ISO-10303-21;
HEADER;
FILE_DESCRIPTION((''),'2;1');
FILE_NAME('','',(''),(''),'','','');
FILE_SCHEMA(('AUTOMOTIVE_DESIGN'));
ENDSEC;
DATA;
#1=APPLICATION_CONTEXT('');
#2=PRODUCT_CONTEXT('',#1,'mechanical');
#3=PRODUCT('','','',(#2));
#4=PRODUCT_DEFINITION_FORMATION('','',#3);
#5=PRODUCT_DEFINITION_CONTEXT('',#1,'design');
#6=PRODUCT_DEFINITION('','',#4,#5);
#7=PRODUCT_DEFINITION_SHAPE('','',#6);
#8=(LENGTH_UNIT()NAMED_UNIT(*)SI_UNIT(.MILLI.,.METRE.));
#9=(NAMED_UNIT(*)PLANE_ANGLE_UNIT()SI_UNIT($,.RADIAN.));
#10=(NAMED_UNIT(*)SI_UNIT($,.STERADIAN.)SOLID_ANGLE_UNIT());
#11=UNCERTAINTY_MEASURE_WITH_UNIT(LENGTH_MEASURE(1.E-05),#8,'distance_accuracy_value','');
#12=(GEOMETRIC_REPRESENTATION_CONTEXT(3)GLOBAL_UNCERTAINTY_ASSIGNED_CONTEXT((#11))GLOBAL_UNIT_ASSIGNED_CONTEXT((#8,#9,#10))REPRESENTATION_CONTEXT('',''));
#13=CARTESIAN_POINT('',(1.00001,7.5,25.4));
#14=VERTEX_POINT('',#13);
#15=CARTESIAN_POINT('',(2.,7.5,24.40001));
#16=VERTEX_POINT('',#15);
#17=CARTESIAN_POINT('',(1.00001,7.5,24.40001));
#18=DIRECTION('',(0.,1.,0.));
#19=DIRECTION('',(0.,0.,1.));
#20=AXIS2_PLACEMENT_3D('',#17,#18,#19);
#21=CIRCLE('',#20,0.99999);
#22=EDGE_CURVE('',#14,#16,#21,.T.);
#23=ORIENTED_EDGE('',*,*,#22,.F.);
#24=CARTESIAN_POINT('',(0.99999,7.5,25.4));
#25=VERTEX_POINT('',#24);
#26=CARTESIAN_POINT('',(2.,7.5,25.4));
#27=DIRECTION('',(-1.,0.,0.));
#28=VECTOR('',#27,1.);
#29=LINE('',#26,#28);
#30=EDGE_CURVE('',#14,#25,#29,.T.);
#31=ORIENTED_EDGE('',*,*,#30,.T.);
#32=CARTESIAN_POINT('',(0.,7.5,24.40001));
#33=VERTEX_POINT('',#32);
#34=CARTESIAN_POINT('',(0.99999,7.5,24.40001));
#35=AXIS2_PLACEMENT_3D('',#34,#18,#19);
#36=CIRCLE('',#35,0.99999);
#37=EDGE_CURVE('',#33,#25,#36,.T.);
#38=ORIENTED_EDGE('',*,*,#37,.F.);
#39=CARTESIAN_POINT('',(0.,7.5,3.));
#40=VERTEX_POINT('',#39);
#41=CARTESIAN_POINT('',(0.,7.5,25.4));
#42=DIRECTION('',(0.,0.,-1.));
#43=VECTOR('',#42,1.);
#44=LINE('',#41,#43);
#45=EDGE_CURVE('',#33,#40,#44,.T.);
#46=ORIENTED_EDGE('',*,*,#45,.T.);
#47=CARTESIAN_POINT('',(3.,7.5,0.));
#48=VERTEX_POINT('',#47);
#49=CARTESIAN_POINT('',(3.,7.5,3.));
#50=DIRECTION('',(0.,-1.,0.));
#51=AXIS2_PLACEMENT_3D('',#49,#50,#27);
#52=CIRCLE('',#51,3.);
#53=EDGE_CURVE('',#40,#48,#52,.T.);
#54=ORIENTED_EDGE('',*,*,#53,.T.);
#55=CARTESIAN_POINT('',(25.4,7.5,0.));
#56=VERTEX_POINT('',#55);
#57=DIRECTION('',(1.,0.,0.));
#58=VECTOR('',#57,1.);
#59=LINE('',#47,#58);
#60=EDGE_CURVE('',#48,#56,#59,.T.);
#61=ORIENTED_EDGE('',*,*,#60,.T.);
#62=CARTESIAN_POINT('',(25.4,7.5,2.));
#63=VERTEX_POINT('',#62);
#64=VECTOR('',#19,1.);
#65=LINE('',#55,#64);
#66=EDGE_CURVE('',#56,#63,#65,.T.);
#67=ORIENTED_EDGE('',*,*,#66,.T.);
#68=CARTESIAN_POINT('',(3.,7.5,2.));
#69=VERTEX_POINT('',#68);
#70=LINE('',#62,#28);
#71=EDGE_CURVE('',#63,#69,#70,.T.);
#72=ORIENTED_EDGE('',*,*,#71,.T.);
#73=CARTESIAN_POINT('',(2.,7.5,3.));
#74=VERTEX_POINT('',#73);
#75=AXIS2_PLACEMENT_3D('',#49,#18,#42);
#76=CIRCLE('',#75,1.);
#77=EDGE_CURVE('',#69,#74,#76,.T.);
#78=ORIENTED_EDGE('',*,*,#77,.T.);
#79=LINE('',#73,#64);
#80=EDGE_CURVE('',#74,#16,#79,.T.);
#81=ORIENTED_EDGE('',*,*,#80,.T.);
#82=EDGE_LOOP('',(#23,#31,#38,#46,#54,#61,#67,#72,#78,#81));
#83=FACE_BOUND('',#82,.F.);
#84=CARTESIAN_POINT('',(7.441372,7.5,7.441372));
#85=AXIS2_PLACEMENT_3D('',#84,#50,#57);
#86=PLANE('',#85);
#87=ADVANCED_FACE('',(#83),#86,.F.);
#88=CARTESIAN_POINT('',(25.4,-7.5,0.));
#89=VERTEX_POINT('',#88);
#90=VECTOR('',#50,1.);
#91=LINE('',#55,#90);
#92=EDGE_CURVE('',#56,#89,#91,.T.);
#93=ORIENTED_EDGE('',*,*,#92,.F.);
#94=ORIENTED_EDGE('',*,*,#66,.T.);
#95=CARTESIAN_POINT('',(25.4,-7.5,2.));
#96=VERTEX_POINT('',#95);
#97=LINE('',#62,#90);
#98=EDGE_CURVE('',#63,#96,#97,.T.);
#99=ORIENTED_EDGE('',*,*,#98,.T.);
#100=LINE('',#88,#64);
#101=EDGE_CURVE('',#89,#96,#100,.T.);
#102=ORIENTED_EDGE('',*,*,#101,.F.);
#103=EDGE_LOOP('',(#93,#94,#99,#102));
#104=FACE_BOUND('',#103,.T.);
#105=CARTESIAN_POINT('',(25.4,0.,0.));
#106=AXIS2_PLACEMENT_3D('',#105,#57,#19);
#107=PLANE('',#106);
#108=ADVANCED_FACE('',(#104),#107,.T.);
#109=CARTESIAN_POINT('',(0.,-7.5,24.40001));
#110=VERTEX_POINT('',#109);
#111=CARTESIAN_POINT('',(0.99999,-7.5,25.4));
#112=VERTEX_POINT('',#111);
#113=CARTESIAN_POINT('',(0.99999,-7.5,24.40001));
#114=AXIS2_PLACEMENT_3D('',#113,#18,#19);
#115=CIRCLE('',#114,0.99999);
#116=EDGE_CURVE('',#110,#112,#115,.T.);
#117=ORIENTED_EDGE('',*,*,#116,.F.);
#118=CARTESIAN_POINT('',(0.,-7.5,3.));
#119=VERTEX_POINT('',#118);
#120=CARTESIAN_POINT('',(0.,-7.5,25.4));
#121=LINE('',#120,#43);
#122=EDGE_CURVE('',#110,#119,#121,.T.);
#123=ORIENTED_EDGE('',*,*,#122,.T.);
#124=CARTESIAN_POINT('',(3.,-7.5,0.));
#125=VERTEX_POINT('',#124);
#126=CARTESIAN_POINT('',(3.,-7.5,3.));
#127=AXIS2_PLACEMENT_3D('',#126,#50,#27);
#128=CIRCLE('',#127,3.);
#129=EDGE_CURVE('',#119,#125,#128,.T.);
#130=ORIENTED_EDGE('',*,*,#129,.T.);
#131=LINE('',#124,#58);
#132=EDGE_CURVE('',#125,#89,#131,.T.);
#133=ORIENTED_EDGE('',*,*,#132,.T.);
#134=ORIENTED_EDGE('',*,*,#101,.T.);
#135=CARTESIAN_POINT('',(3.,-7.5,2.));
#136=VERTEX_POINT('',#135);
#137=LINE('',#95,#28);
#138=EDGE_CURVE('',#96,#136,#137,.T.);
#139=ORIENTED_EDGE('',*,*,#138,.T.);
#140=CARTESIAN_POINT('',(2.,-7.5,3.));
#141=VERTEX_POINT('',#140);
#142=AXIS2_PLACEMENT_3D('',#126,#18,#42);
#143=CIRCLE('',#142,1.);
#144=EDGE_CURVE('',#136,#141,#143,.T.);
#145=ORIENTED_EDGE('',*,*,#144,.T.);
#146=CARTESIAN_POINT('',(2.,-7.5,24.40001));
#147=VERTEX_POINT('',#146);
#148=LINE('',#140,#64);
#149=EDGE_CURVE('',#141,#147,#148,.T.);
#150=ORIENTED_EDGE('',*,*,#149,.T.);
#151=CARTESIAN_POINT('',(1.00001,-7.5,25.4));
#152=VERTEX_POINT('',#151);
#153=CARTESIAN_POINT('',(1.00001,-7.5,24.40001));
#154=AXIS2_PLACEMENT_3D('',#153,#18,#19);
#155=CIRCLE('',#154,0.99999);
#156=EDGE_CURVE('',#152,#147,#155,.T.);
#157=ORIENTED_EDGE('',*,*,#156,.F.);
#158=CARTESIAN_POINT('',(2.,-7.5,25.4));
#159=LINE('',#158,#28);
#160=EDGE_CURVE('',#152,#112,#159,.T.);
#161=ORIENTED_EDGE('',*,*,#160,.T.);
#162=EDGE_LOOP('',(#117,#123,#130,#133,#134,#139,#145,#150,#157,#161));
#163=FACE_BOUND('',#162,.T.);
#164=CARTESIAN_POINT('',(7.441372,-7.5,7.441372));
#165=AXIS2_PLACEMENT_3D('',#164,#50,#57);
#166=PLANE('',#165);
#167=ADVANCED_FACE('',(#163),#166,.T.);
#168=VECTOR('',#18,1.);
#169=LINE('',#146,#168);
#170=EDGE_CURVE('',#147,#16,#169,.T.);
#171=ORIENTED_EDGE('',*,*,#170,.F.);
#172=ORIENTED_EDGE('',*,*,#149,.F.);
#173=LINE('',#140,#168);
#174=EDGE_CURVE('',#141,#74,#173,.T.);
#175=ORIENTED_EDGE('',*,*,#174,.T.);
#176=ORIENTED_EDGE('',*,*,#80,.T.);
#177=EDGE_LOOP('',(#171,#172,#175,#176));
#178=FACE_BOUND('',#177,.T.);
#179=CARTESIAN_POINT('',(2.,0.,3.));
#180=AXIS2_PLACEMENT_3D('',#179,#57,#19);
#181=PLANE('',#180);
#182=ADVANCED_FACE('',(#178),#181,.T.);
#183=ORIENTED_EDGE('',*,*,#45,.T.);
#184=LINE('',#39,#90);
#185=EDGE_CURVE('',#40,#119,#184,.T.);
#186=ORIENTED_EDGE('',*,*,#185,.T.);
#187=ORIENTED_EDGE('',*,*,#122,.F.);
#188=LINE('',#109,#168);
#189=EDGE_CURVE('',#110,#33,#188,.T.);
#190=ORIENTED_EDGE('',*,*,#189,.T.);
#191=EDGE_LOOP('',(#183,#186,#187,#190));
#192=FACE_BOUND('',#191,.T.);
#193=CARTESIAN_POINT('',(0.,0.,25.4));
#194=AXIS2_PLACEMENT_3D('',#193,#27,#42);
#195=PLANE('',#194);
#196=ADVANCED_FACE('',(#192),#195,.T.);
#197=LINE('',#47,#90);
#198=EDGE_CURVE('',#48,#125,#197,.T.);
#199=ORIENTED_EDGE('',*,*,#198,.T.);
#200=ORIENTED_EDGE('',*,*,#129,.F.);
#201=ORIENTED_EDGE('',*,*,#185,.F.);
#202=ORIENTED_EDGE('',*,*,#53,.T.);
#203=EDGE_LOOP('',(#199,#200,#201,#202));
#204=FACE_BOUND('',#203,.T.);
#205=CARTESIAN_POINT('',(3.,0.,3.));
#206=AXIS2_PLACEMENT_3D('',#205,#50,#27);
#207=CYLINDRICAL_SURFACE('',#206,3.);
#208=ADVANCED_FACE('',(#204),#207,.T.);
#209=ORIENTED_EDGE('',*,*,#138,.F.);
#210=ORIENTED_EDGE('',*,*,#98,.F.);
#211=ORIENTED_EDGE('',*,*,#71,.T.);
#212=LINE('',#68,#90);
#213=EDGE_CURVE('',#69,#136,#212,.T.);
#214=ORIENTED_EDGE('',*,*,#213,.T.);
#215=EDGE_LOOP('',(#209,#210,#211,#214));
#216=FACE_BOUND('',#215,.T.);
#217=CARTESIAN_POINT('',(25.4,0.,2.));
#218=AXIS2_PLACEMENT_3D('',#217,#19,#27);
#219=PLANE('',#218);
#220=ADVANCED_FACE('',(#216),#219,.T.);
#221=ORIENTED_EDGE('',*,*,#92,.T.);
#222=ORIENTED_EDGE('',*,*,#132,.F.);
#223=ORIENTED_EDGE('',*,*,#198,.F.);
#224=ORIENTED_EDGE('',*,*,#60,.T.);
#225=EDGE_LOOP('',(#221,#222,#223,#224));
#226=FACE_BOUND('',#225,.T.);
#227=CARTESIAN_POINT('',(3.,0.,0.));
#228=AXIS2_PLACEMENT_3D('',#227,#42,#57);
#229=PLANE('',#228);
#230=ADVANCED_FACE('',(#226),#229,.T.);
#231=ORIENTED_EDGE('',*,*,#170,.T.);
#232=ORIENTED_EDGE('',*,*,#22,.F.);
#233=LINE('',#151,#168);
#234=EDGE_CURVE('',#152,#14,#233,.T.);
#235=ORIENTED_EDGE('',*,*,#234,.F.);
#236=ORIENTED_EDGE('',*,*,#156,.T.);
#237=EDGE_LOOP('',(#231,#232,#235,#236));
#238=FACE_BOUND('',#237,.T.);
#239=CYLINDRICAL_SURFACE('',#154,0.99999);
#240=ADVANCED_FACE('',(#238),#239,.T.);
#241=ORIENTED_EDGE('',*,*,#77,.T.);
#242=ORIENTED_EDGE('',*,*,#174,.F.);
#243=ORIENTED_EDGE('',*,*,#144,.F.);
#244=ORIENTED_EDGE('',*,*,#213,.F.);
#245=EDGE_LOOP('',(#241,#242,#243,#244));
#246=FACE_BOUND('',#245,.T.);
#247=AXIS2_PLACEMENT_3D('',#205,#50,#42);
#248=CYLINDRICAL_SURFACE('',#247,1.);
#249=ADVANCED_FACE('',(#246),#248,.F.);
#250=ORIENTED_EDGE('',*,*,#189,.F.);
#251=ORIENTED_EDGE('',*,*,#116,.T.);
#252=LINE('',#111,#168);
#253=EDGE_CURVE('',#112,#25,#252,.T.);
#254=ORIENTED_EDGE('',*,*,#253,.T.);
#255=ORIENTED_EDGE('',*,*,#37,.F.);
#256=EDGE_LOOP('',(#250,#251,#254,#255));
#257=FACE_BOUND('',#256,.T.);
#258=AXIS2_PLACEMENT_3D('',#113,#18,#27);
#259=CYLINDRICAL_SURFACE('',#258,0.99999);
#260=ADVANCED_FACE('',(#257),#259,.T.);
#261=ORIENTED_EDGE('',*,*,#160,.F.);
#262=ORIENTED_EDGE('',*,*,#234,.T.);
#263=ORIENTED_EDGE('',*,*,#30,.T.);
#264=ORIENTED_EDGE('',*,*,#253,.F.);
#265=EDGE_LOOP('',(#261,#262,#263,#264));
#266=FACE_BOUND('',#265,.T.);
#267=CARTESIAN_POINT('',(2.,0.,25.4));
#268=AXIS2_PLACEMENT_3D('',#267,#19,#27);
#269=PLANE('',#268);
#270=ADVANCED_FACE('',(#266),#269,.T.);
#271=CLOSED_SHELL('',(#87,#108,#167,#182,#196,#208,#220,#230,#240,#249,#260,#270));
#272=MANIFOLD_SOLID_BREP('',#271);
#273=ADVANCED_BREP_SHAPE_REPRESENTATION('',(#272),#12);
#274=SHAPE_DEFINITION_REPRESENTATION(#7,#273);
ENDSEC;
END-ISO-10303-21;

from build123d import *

# Parameters (mm, degrees)
F1_DEPTH = 7.5
F2_R     = 0.99999


# Not quite as in the source:
# - a fillet or chamfer is up to 0.001 mm smaller than in the source, because OpenCascade refuses the exact size


with BuildPart() as f1:
    # F0 (on Front) → F1 (new body, symmetric)
    with BuildSketch(Plane.XZ):
        with BuildLine():
            Line((0, 25.4), (0, 3))
            ThreePointArc((0, 3), (0.8786796564, 0.8786796564), (3, 0))
            Line((3, 0), (25.4, 0))
            Line((25.4, 0), (25.4, 2))
            Line((25.4, 2), (3, 2))
            ThreePointArc((3, 2), (2.2928932188, 2.2928932188), (2, 3))
            Line((2, 3), (2, 25.4))
            Line((2, 25.4), (0, 25.4))
        make_face()
    extrude(amount=F1_DEPTH, both=True)

    # F2 (radius 1 in the source; OpenCascade refuses exactly that, so slightly less here)
    f2_edges = [f1.edges().sort_by_distance(p)[0] for p in [
        (2, 0, 25.4),
        (0, 0, 25.4),
    ]]
    fillet(f2_edges, radius=F2_R)


solid = f1.part
